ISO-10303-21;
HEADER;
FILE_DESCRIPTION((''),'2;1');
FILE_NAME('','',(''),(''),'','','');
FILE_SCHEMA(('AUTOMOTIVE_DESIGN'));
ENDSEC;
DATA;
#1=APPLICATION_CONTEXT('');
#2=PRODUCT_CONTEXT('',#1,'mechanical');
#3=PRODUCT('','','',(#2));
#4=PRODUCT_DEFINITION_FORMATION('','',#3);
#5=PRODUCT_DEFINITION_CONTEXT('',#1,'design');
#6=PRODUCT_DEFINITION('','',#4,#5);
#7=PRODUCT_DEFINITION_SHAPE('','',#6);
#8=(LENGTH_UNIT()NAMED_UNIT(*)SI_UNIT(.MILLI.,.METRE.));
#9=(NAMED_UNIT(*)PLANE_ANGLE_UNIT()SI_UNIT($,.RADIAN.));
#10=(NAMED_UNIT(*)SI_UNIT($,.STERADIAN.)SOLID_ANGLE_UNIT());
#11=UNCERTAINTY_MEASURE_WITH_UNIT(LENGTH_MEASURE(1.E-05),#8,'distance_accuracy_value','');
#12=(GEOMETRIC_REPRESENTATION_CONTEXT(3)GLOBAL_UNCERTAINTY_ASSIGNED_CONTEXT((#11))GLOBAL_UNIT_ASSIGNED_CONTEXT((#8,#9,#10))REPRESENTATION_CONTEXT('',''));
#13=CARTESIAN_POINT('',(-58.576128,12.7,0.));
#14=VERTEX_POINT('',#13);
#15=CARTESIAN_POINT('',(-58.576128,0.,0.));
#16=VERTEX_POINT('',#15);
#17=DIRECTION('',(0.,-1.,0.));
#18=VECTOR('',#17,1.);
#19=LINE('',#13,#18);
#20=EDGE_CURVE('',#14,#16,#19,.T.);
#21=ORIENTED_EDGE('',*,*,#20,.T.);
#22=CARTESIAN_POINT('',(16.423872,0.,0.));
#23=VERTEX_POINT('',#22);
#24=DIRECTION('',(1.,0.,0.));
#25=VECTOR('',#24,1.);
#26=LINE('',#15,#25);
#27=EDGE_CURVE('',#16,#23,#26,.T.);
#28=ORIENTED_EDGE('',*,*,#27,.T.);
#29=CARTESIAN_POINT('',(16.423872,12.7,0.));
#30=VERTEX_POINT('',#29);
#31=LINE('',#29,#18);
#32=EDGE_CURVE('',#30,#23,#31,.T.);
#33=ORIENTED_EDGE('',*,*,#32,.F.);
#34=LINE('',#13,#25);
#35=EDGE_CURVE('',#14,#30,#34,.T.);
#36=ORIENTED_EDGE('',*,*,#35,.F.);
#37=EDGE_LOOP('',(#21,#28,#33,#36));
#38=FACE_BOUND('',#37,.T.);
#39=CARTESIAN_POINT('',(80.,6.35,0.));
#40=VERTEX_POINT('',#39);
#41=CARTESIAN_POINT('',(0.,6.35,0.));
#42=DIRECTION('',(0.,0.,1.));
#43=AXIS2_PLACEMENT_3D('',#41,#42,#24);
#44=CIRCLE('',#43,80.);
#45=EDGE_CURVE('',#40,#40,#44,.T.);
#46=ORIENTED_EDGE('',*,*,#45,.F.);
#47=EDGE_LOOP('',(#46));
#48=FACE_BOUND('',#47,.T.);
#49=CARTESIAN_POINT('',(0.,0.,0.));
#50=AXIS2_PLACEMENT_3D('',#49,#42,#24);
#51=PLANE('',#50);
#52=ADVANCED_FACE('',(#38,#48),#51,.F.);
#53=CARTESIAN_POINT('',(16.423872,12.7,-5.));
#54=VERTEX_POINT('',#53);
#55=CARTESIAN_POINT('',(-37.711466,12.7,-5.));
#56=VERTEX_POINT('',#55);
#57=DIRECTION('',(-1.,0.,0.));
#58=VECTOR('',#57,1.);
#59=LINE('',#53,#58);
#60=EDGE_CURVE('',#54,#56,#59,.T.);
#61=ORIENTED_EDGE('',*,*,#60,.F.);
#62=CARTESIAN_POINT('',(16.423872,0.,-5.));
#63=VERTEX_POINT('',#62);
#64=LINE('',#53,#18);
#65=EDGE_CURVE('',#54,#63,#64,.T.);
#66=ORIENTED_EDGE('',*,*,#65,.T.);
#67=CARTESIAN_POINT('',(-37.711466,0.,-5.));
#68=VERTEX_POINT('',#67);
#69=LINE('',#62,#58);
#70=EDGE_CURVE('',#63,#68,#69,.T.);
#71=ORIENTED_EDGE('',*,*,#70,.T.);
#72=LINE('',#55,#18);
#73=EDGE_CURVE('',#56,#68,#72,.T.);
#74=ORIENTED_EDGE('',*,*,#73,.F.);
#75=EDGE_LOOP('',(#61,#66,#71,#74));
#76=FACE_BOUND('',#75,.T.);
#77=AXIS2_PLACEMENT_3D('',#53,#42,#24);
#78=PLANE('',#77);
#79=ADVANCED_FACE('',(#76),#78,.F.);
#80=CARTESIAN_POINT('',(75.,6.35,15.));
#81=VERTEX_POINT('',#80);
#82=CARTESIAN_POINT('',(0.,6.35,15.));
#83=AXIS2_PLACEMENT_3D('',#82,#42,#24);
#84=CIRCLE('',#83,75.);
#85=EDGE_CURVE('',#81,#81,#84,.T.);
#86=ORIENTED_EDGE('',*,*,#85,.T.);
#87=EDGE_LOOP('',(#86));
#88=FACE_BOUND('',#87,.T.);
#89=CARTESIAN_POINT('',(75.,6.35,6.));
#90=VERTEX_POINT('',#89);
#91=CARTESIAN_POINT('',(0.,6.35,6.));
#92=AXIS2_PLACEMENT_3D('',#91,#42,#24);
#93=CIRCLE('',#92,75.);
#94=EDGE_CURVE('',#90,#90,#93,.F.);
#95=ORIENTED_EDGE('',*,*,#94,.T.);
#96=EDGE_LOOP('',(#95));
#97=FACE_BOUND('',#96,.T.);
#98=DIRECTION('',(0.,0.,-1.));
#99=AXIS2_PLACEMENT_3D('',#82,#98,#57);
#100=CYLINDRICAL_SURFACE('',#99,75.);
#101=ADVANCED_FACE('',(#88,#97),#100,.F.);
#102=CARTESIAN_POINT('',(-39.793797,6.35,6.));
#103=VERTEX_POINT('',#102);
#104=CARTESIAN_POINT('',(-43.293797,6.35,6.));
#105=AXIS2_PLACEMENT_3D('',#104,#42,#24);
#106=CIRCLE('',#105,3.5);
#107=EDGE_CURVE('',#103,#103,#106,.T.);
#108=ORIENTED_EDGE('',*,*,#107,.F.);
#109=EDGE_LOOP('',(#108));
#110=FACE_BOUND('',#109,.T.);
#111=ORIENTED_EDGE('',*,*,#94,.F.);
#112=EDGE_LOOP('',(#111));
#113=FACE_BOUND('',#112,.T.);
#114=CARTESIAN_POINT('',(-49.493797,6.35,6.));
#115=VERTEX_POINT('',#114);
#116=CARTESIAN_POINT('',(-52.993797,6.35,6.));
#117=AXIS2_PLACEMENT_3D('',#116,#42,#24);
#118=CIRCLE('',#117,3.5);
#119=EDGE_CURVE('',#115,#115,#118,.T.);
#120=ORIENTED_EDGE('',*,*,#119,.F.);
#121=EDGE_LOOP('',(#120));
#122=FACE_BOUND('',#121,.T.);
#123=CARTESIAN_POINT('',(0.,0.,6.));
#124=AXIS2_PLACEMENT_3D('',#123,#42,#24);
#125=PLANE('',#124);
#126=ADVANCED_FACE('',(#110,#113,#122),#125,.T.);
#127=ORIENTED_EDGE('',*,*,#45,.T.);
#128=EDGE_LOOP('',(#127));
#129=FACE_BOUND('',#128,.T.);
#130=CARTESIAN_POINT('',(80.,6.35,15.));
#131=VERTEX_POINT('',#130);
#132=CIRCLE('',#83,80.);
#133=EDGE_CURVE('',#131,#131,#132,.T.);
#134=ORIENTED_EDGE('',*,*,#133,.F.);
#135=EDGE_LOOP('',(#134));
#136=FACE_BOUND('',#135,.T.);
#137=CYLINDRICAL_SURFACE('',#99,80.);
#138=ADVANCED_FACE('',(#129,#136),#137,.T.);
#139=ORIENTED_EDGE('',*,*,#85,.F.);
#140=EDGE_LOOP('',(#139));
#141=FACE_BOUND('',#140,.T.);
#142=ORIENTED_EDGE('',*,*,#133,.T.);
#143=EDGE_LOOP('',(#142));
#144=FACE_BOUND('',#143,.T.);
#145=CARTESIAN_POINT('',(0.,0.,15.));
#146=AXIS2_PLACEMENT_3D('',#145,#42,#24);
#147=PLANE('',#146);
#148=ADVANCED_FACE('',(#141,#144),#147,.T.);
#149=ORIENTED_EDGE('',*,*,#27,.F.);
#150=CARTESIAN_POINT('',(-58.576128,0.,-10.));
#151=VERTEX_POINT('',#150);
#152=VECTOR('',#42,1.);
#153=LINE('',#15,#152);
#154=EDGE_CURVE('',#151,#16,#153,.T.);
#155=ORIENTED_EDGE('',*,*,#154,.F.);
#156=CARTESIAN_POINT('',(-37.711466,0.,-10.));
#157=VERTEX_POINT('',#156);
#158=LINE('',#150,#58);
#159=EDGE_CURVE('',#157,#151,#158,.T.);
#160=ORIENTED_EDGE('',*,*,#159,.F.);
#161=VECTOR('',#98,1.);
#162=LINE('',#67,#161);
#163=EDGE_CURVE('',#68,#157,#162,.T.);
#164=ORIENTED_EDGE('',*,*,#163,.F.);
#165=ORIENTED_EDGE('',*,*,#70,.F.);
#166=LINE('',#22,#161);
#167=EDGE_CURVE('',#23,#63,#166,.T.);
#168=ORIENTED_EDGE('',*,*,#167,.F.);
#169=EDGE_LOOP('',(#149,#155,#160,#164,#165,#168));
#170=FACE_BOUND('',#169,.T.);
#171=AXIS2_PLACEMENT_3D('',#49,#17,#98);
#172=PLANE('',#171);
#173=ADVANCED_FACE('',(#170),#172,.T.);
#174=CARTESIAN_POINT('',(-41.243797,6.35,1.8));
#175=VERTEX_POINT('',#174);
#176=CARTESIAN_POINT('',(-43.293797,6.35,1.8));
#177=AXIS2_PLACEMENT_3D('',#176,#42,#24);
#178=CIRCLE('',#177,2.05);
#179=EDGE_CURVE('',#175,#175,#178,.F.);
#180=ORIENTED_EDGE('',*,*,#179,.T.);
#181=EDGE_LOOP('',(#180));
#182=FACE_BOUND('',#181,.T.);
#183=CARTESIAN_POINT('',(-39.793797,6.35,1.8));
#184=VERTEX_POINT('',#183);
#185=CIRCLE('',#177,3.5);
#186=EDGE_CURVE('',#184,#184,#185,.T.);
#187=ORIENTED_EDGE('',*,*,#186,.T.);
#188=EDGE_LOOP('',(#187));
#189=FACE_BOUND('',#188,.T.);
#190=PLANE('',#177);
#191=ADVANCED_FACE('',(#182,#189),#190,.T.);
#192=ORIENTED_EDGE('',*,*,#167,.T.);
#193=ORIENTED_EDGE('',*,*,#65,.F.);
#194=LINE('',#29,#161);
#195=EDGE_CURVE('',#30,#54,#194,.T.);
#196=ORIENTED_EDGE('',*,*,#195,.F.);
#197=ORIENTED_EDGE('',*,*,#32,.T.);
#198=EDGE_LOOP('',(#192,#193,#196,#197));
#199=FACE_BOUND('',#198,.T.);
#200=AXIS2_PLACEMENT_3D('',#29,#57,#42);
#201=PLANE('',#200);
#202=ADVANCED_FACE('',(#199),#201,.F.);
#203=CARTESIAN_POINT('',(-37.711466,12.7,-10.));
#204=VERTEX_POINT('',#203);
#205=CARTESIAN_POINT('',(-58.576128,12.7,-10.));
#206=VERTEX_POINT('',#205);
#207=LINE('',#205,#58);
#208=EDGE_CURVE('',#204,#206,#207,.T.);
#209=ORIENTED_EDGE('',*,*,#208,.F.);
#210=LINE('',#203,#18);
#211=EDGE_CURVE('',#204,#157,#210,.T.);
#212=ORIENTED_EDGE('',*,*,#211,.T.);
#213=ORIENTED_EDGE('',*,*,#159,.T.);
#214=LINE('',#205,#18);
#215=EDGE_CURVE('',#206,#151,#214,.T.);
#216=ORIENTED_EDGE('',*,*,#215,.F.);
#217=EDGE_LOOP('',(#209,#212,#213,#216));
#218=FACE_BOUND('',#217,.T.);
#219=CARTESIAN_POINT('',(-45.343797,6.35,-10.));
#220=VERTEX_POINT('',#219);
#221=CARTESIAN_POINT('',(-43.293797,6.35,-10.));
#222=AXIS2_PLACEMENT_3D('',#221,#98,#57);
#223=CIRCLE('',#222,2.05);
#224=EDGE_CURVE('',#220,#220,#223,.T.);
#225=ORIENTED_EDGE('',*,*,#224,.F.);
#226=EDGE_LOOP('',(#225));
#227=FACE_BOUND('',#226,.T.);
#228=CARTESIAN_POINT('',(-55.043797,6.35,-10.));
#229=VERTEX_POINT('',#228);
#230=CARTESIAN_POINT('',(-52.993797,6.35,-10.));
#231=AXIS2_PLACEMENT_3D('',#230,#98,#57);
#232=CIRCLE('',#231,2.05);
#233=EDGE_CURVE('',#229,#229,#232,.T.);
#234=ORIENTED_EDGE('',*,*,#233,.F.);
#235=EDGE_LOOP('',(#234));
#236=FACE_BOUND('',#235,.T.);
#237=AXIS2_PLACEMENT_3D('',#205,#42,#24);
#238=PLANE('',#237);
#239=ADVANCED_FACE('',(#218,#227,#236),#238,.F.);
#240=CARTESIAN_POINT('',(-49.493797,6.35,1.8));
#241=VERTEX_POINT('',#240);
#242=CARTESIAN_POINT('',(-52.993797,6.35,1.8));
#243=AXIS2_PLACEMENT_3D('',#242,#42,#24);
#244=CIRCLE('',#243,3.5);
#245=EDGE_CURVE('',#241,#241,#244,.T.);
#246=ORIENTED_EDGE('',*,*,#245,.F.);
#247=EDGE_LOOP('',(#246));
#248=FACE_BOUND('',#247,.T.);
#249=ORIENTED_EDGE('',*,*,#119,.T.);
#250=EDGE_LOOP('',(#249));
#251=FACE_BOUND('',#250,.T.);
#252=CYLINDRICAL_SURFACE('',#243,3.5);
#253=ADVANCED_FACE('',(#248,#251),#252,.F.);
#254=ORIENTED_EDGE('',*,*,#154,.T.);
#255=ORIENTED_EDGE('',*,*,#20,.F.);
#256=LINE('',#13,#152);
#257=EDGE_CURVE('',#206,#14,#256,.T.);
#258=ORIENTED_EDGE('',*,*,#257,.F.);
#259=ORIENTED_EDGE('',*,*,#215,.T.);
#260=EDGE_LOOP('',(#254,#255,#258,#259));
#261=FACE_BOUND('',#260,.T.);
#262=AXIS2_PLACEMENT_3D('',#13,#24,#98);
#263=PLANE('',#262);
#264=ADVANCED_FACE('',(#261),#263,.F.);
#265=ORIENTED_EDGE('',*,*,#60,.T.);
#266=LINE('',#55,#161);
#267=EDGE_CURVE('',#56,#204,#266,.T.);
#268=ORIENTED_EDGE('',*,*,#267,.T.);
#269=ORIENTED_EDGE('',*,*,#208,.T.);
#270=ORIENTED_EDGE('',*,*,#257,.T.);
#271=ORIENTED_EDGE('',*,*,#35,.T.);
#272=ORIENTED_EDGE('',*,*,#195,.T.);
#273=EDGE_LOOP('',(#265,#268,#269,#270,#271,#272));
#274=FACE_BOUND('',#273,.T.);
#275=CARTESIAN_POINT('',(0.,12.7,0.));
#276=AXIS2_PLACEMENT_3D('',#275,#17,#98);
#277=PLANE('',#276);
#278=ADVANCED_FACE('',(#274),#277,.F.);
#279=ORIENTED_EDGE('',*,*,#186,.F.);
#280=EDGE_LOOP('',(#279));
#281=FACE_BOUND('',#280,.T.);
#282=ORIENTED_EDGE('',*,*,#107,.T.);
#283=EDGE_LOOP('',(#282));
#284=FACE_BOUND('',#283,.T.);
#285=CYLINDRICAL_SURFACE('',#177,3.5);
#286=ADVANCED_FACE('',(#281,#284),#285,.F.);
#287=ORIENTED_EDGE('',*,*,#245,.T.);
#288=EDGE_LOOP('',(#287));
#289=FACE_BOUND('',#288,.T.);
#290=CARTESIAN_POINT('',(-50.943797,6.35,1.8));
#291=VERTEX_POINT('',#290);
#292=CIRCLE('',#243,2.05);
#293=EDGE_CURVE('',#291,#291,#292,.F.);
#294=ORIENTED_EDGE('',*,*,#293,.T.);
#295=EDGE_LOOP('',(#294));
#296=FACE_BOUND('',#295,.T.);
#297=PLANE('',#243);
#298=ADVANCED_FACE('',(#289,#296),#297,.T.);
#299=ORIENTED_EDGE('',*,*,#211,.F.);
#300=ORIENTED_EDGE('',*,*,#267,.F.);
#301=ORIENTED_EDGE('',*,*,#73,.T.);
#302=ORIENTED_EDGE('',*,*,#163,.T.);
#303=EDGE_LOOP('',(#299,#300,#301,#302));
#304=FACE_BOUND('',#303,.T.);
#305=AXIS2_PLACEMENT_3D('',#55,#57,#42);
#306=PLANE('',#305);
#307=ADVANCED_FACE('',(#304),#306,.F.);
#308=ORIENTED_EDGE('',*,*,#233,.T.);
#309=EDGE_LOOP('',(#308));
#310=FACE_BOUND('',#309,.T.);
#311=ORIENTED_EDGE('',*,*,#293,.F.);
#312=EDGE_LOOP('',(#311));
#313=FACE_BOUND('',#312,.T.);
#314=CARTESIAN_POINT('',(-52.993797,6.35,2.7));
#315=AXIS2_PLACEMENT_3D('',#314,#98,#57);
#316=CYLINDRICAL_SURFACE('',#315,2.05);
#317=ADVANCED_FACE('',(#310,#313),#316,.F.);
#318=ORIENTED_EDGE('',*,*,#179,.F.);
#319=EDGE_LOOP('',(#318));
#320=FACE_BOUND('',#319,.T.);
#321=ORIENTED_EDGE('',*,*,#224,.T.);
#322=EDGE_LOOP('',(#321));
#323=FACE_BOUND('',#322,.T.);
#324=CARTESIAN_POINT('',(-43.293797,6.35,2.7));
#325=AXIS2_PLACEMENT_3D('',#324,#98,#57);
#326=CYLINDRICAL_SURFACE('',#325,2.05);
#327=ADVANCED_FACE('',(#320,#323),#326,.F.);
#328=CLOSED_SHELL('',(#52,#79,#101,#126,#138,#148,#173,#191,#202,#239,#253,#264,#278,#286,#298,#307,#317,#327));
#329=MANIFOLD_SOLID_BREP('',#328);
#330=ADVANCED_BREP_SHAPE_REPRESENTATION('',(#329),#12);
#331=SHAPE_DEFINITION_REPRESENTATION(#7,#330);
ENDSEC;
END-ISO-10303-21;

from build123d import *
from build123d.topology import SkipClean

# Parameters (mm, degrees)
BOSS_EXTRUDE1_DEPTH = 12.7
SKETCH2_R           = 2.05
CUT_EXTRUDE1_DEPTH  = 12.7
SKETCH3_R           = 75
SKETCH3_R_2         = 2.05
BOSS_EXTRUDE2_DEPTH = 6
SKETCH3_4_R         = 80
SKETCH3_4_R_2       = 75
BOSS_EXTRUDE3_DEPTH = 15
SKETCH4_R           = 3.5
CUT_EXTRUDE2_DEPTH  = 4.2


with BuildPart() as part:
    # Sketch1 → Boss-Extrude1 (new body)
    with BuildSketch(Plane(origin=(0, 0, 0), x_dir=(1, 0, 0), z_dir=(0, 1, 0))):
        Polygon((-58.57612782, 0), (16.42387218, 0), (16.42387218, 5), (-37.711466165, 5), (-37.711466165, 10), (-58.57612782, 10), align=None)
    extrude(amount=BOSS_EXTRUDE1_DEPTH)

    # Sketch2 → Cut-Extrude1 (cut)
    with BuildSketch(Plane(origin=(0, 0, -10), x_dir=(-1, 0, 0), z_dir=(0, 0, -1))):
        with Locations((43.293796992, 6.35)):
            Circle(SKETCH2_R)
        with Locations((52.993796992, 6.35)):
            Circle(SKETCH2_R)
    extrude(amount=-CUT_EXTRUDE1_DEPTH, mode=Mode.SUBTRACT)

    # Sketch3 → Boss-Extrude2 (add)
    with SkipClean():  # the faces are left unmerged after this step: merging them gives an invalid solid
        with BuildSketch(Plane.XY):
            with Locations((0, 6.35)):
                Circle(SKETCH3_R)
            with Locations((-52.993796992, 6.35)):
                Circle(SKETCH3_R_2, mode=Mode.SUBTRACT)
            with Locations((-43.293796992, 6.35)):
                Circle(SKETCH3_R_2, mode=Mode.SUBTRACT)
        extrude(amount=BOSS_EXTRUDE2_DEPTH)

    # Sketch3<4> → Boss-Extrude3 (add)
    with SkipClean():  # the faces are left unmerged after this step: merging them gives an invalid solid
        with BuildSketch(Plane.XY):
            with Locations((0, 6.35)):
                Circle(SKETCH3_4_R)
            with Locations((0, 6.35)):
                Circle(SKETCH3_4_R_2, mode=Mode.SUBTRACT)
        extrude(amount=BOSS_EXTRUDE3_DEPTH)

    # Sketch4 → Cut-Extrude2 (cut)
    with SkipClean():  # the faces are left unmerged after this step: merging them gives an invalid solid
        with BuildSketch(Plane.XY.offset(6)):
            with Locations((-52.993796992, 6.35)):
                Circle(SKETCH4_R)
            with Locations((-43.293796992, 6.35)):
                Circle(SKETCH4_R)
        extrude(amount=-CUT_EXTRUDE2_DEPTH, mode=Mode.SUBTRACT)


solid = part.part
